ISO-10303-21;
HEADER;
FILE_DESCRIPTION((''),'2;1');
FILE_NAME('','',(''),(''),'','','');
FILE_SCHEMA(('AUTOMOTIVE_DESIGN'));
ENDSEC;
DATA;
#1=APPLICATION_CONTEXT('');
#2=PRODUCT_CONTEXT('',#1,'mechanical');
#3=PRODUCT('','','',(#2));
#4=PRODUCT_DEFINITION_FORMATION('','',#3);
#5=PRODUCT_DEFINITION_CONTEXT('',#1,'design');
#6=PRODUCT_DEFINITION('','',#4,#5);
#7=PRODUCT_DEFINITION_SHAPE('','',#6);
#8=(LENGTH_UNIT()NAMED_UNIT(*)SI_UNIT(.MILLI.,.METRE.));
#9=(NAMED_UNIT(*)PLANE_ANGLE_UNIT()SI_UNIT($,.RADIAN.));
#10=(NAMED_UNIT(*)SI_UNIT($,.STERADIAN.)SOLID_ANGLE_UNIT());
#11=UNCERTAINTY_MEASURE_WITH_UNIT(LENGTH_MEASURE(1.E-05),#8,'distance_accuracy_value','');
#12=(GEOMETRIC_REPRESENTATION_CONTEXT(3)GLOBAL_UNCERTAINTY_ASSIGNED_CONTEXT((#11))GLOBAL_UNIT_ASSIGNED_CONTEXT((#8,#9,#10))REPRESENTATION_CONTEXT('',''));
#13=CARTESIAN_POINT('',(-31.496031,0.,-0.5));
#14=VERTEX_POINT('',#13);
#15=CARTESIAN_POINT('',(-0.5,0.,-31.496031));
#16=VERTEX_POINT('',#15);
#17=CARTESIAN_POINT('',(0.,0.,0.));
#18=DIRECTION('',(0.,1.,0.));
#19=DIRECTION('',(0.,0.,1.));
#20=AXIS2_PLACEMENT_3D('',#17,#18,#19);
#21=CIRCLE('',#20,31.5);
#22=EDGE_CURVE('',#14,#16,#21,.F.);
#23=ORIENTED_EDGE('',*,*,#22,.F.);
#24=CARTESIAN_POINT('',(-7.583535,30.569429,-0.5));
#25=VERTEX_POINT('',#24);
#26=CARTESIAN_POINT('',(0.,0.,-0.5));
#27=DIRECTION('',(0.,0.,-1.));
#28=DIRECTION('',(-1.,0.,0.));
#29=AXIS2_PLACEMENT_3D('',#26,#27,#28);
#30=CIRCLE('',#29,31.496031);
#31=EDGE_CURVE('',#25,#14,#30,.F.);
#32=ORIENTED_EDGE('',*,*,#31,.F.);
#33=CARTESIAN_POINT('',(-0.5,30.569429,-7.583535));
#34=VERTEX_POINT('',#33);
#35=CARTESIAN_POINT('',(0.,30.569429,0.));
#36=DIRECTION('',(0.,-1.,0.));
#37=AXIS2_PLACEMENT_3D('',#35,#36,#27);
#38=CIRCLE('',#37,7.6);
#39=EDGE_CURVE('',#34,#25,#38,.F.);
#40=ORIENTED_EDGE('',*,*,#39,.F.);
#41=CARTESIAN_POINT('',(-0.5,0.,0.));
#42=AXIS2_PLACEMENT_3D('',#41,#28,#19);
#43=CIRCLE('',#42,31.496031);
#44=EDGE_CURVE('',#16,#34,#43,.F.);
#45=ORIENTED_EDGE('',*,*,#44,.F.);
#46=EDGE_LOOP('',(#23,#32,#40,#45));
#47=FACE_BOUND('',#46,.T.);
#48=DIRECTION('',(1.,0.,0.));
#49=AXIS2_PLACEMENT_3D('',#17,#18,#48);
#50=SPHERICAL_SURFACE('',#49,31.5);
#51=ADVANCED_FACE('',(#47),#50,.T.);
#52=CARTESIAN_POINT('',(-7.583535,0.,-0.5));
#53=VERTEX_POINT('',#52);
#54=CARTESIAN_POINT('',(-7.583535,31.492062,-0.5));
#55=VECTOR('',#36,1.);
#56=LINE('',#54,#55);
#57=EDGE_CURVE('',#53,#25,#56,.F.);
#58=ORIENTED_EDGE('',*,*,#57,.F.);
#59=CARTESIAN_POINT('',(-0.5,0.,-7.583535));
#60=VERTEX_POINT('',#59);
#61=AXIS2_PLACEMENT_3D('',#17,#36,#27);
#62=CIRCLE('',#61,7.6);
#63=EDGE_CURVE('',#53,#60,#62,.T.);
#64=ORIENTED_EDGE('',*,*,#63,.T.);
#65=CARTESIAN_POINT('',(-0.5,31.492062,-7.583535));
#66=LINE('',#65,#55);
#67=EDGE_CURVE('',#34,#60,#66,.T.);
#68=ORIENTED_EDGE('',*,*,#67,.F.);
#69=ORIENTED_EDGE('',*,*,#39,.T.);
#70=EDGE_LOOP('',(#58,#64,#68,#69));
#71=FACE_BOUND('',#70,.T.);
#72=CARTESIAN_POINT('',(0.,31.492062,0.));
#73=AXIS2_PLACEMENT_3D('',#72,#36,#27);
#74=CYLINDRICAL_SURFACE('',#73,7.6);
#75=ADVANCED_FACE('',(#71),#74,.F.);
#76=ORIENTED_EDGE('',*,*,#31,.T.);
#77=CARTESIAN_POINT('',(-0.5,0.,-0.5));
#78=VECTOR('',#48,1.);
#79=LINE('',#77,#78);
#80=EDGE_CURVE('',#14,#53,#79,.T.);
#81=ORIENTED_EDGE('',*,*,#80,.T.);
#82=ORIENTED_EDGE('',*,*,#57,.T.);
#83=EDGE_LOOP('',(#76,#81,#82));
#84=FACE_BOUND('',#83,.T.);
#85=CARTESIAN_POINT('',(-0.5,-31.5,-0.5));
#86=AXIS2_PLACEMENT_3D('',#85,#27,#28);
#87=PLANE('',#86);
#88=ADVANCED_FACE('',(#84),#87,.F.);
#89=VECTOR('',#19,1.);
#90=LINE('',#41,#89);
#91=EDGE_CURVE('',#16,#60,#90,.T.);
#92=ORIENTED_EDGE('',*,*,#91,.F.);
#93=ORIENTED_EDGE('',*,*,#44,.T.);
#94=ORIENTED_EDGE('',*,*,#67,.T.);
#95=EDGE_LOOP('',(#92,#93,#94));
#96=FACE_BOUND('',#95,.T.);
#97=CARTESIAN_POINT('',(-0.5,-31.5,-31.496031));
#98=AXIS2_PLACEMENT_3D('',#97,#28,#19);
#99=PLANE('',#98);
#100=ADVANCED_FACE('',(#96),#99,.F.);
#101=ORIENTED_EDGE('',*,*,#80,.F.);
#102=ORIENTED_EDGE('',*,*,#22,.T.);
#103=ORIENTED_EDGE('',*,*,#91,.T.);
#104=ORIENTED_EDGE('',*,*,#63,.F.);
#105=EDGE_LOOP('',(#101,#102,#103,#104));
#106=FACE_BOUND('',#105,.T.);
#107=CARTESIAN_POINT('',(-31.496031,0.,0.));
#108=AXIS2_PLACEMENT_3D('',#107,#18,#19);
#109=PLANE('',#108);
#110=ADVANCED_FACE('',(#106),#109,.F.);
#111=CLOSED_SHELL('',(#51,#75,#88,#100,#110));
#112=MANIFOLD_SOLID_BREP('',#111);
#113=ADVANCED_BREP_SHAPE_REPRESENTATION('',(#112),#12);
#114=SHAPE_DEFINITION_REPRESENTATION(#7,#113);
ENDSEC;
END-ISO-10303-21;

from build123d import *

# Parameters (mm, degrees)
CUT_EXTRUDE1_DEPTH      = 55.559600438
CUT_EXTRUDE1_DEPTH_BACK = 55.559600438
SKETCH3_W               = 31.496031496
SKETCH3_H               = 31.496031496
CUT_EXTRUDE2_DEPTH      = 55.263283798
SKETCH6_R               = 7.6
CUT_EXTRUDE3_DEPTH      = 55.550435379


with BuildPart() as part:
    # Sketch1 → Revolve1 (revolve)
    with BuildSketch(Plane.XY):
        with BuildLine():
            Line((0, 31.5), (0, -31.5))
            ThreePointArc((0, -31.5), (-31.5, 0), (0, 31.5))
        make_face()
    revolve(axis=Axis((0, 31.5, 0), (0, -1, 0)))

    # Sketch2 → Cut-Extrude1 (cut, two sides: drawn at the far end of the back side and taken through both)
    with BuildSketch(Plane(origin=(0, 0, 0), x_dir=(1, 0, 0), z_dir=(0, 1, 0)).offset(-CUT_EXTRUDE1_DEPTH_BACK)):
        with BuildLine():
            Line((-0.5, 31.496031496), (-0.5, 0.5))
            Line((-0.5, 0.5), (-31.496031496, 0.5))
            ThreePointArc((-31.496031496, 0.5), (22.273863607, -22.273863607), (-0.5, 31.496031496))
        make_face()
    extrude(amount=CUT_EXTRUDE1_DEPTH + CUT_EXTRUDE1_DEPTH_BACK, mode=Mode.SUBTRACT)

    # Sketch3 → Cut-Extrude2 (cut, through all)
    with BuildSketch(Plane(origin=(-0.5, 0, 0), x_dir=(0, 0, -1), z_dir=(1, 0, 0))):
        with Locations((15.748015748, -15.748015748)):
            Rectangle(SKETCH3_W, SKETCH3_H)
    extrude(amount=-CUT_EXTRUDE2_DEPTH, mode=Mode.SUBTRACT)

    # Sketch6 → Cut-Extrude3 (cut, through all)
    with BuildSketch(Plane.XZ):
        Circle(SKETCH6_R)
    extrude(amount=-CUT_EXTRUDE3_DEPTH, mode=Mode.SUBTRACT)


solid = part.part
